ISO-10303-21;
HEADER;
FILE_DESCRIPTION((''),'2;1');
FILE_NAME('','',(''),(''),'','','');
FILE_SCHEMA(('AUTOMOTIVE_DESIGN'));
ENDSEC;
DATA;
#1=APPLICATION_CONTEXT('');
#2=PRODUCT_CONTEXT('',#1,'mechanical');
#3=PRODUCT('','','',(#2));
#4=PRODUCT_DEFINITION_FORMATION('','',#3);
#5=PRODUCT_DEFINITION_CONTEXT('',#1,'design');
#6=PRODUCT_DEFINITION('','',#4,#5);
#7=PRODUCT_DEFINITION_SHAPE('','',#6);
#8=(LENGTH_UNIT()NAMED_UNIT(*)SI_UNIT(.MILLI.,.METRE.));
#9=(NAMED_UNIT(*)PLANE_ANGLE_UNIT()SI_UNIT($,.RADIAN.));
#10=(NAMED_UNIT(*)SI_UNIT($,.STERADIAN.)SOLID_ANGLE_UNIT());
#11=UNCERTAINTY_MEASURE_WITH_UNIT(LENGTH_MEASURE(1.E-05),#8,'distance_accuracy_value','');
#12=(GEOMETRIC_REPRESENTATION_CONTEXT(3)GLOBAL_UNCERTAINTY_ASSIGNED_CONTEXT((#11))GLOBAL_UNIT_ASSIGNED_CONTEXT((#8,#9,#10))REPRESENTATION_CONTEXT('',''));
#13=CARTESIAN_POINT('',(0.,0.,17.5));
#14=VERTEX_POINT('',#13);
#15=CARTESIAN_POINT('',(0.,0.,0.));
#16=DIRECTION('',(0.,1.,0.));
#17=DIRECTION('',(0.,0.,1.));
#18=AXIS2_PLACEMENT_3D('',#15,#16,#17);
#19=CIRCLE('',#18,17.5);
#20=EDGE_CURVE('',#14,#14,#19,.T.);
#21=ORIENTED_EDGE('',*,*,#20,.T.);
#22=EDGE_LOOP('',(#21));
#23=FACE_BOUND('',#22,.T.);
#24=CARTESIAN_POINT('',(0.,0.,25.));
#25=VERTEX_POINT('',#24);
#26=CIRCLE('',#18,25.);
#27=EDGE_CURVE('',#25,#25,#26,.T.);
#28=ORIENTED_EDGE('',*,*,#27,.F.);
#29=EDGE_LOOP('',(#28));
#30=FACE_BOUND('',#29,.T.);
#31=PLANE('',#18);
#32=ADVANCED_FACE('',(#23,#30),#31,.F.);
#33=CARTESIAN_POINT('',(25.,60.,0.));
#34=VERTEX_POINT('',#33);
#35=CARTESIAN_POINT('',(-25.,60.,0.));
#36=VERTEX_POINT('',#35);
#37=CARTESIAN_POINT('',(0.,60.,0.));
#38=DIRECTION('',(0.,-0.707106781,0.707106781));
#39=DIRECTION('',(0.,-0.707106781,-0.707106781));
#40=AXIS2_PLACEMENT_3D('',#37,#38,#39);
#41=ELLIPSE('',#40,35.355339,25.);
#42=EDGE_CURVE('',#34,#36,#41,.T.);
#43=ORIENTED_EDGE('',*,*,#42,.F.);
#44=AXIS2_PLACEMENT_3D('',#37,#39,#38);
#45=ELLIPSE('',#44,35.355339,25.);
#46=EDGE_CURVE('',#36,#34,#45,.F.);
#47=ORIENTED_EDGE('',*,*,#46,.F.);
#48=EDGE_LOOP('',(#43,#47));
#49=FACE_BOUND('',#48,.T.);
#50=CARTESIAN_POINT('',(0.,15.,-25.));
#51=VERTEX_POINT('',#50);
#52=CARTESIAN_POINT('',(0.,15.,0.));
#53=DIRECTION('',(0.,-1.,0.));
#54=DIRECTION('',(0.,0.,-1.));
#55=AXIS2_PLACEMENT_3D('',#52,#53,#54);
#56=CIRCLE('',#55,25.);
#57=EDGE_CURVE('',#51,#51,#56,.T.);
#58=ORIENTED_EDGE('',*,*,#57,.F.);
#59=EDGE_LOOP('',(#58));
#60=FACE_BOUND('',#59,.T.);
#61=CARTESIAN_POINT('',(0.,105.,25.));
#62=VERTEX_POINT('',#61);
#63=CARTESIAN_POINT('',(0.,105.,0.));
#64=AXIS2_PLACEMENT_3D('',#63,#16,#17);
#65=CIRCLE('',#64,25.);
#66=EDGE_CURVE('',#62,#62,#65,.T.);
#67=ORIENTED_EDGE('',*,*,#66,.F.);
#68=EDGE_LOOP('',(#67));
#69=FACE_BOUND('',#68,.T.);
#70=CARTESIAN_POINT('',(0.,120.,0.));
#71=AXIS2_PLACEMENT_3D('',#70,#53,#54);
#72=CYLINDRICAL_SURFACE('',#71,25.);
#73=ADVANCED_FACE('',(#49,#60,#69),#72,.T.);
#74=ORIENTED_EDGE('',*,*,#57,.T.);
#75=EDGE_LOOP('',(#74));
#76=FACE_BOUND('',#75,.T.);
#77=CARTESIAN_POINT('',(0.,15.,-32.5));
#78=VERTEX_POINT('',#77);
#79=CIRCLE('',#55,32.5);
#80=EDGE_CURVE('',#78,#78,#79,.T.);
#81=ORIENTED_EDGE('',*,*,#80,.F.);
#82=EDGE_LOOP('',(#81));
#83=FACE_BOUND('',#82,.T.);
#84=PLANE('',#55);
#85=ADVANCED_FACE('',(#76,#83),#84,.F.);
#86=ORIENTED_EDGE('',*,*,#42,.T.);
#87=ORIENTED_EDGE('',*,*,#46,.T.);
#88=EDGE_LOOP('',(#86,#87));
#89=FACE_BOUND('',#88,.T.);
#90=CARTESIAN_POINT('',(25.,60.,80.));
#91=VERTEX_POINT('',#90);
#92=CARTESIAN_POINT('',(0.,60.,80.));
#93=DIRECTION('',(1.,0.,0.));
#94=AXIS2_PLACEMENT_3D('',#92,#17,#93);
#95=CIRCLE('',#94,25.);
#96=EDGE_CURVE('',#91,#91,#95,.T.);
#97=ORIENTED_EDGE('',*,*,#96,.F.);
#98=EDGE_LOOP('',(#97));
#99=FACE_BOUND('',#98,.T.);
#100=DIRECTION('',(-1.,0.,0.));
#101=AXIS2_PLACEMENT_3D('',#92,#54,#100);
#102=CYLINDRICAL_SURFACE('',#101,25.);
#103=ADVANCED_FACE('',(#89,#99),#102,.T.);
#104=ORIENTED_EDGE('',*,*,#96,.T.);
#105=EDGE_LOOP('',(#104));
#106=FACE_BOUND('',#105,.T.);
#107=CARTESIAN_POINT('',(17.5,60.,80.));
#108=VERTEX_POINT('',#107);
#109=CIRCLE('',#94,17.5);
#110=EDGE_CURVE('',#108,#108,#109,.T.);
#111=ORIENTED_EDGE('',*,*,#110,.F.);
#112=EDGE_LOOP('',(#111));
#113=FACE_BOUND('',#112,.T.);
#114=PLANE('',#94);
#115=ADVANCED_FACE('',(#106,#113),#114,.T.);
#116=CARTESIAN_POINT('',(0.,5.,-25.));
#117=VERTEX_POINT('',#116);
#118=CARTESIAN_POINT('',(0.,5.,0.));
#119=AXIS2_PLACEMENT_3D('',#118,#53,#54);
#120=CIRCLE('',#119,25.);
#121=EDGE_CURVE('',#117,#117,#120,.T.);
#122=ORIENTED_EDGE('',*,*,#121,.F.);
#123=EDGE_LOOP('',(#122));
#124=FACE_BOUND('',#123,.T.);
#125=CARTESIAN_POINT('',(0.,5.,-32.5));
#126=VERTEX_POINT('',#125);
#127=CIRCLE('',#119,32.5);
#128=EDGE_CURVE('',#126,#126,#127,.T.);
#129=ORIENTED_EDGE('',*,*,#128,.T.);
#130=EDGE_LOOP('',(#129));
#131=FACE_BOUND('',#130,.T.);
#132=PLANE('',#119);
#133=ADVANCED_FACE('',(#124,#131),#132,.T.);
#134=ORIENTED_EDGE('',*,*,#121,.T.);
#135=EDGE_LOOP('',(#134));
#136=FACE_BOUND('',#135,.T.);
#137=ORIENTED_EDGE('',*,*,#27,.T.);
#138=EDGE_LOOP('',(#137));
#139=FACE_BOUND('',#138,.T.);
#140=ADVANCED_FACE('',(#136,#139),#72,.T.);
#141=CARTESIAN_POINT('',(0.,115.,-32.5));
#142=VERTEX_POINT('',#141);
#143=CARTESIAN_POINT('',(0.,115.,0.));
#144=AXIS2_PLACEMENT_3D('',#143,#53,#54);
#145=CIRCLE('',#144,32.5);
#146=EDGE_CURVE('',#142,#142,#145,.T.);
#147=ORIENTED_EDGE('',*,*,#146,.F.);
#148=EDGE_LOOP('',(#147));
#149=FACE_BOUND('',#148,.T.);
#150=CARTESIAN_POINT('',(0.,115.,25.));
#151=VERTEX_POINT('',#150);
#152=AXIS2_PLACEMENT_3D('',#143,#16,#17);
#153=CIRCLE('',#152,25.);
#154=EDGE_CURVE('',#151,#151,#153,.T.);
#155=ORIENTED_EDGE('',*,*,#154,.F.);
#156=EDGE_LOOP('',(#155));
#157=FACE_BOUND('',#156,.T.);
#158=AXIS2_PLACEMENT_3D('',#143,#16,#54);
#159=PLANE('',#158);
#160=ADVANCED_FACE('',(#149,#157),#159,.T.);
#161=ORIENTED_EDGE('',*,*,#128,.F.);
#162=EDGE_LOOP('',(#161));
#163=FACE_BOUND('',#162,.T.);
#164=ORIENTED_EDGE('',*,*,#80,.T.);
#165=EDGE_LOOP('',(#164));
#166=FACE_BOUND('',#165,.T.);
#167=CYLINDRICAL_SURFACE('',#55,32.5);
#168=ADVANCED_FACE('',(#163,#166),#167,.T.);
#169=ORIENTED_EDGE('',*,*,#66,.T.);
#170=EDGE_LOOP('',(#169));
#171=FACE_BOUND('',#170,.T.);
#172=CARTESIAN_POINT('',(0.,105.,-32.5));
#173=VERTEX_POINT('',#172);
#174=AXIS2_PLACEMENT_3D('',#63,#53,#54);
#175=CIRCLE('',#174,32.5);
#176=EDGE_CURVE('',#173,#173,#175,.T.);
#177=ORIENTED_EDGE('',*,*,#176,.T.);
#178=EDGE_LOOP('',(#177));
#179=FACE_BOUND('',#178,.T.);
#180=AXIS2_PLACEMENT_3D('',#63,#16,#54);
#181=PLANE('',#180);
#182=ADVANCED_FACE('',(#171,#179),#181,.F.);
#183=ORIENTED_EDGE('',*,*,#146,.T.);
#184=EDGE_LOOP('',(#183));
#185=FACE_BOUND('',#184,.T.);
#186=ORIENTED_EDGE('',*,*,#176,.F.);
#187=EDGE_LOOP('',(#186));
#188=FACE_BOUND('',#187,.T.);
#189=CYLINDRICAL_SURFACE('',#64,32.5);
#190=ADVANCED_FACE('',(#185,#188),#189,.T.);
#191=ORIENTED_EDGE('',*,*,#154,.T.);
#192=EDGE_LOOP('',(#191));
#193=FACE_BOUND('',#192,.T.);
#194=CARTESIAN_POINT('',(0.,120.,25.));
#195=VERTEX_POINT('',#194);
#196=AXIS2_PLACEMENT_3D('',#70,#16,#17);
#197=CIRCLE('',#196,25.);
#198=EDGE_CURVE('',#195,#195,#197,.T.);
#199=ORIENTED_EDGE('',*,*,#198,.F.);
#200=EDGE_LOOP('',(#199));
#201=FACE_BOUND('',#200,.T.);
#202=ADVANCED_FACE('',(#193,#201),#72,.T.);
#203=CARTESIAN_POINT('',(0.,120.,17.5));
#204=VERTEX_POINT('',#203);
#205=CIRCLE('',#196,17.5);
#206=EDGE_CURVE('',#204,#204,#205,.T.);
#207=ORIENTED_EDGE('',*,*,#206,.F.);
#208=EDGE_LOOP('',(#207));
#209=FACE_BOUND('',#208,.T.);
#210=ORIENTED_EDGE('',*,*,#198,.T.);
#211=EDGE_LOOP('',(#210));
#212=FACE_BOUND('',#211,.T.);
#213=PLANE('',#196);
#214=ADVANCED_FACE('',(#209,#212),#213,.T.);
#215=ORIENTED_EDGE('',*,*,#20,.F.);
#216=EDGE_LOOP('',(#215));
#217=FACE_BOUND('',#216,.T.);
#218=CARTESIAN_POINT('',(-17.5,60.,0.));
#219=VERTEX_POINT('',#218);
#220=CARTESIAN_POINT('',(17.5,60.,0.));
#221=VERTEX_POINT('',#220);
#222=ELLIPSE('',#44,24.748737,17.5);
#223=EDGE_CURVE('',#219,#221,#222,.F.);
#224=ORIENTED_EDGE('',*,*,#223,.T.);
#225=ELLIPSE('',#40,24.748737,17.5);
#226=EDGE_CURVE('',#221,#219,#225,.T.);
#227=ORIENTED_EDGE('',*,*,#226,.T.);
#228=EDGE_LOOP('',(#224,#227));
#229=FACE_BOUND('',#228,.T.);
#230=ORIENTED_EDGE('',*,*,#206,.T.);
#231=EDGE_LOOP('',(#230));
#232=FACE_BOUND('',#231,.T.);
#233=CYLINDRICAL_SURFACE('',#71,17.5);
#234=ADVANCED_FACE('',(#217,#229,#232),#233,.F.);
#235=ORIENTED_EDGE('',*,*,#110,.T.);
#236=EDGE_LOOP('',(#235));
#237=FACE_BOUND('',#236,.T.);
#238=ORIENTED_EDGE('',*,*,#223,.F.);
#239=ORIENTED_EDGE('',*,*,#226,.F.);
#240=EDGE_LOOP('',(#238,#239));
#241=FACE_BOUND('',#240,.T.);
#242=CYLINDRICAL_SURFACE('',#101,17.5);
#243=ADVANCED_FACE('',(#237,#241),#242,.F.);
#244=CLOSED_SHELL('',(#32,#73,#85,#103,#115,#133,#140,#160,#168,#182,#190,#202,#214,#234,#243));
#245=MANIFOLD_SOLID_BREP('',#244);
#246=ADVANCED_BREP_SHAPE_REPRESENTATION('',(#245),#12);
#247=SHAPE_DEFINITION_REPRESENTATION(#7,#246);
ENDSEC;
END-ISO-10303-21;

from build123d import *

# Parameters (mm, degrees)
SKETCH2_R           = 25
BOSS_EXTRUDE1_DEPTH = 120
SKETCH3_R           = 25
BOSS_EXTRUDE2_DEPTH = 80
SHELL1_OUTLINE_R    = 17.5
SHELL1_DEPTH        = 120
SHELL1_START        = -1e-07
SHELL1_2_OUTLINE_R  = 17.5
SHELL1_2_DEPTH      = 80.0000001
BOSS_EXTRUDE3_START = -5
SKETCH4_R           = 32.5
BOSS_EXTRUDE3_DEPTH = 10
SKETCH5_R           = 17.5
CUT_EXTRUDE1_DEPTH  = 144.809770183


with BuildPart() as part:
    # Sketch2 → Boss-Extrude1 (new body)
    with BuildSketch(Plane(origin=(0, 0, 0), x_dir=(1, 0, 0), z_dir=(0, 1, 0))):
        with Locations(Location((0, 0, 0), (0, 0, 270))):
            Circle(SKETCH2_R)
    extrude(amount=BOSS_EXTRUDE1_DEPTH)

    # Sketch3 → Boss-Extrude2 (add)
    with BuildSketch(Plane.XY):
        with Locations((0, 60)):
            Circle(SKETCH3_R)
    extrude(amount=BOSS_EXTRUDE2_DEPTH)

    # Shell1: read off the stored shape, not the designer's step
    # Shell1 outline → Shell1 (cut)
    with BuildSketch(Plane(origin=(0, 0, 0), x_dir=(1, 0, 0), z_dir=(0, 1, 0))):
        Circle(SHELL1_OUTLINE_R)
    extrude(amount=SHELL1_DEPTH, mode=Mode.SUBTRACT)

    # Shell1 2 outline → Shell1 2 (cut)
    with BuildSketch(Plane.XY.offset(SHELL1_START)):
        with Locations((0, 60)):
            Circle(SHELL1_2_OUTLINE_R)
    extrude(amount=SHELL1_2_DEPTH, mode=Mode.SUBTRACT)

    # Sketch4 → Boss-Extrude3 (add)
    with BuildSketch(Plane.XZ.offset(BOSS_EXTRUDE3_START)):
        with Locations(Location((0, 0, 0), (0, 0, 270))):
            Circle(SKETCH4_R)
    boss_extrude3 = extrude(amount=-BOSS_EXTRUDE3_DEPTH)

    # Mirror1: Boss-Extrude3 across plane
    add(boss_extrude3.mirror(Plane.ZX.offset(60)))

    # Sketch5 → Cut-Extrude1 (cut, through all)
    with BuildSketch(Plane.XZ.offset(-5)):
        with Locations(Location((0, 0, 0), (0, 0, 90))):
            Circle(SKETCH5_R)
    extrude(amount=-CUT_EXTRUDE1_DEPTH, mode=Mode.SUBTRACT)


solid = part.part
